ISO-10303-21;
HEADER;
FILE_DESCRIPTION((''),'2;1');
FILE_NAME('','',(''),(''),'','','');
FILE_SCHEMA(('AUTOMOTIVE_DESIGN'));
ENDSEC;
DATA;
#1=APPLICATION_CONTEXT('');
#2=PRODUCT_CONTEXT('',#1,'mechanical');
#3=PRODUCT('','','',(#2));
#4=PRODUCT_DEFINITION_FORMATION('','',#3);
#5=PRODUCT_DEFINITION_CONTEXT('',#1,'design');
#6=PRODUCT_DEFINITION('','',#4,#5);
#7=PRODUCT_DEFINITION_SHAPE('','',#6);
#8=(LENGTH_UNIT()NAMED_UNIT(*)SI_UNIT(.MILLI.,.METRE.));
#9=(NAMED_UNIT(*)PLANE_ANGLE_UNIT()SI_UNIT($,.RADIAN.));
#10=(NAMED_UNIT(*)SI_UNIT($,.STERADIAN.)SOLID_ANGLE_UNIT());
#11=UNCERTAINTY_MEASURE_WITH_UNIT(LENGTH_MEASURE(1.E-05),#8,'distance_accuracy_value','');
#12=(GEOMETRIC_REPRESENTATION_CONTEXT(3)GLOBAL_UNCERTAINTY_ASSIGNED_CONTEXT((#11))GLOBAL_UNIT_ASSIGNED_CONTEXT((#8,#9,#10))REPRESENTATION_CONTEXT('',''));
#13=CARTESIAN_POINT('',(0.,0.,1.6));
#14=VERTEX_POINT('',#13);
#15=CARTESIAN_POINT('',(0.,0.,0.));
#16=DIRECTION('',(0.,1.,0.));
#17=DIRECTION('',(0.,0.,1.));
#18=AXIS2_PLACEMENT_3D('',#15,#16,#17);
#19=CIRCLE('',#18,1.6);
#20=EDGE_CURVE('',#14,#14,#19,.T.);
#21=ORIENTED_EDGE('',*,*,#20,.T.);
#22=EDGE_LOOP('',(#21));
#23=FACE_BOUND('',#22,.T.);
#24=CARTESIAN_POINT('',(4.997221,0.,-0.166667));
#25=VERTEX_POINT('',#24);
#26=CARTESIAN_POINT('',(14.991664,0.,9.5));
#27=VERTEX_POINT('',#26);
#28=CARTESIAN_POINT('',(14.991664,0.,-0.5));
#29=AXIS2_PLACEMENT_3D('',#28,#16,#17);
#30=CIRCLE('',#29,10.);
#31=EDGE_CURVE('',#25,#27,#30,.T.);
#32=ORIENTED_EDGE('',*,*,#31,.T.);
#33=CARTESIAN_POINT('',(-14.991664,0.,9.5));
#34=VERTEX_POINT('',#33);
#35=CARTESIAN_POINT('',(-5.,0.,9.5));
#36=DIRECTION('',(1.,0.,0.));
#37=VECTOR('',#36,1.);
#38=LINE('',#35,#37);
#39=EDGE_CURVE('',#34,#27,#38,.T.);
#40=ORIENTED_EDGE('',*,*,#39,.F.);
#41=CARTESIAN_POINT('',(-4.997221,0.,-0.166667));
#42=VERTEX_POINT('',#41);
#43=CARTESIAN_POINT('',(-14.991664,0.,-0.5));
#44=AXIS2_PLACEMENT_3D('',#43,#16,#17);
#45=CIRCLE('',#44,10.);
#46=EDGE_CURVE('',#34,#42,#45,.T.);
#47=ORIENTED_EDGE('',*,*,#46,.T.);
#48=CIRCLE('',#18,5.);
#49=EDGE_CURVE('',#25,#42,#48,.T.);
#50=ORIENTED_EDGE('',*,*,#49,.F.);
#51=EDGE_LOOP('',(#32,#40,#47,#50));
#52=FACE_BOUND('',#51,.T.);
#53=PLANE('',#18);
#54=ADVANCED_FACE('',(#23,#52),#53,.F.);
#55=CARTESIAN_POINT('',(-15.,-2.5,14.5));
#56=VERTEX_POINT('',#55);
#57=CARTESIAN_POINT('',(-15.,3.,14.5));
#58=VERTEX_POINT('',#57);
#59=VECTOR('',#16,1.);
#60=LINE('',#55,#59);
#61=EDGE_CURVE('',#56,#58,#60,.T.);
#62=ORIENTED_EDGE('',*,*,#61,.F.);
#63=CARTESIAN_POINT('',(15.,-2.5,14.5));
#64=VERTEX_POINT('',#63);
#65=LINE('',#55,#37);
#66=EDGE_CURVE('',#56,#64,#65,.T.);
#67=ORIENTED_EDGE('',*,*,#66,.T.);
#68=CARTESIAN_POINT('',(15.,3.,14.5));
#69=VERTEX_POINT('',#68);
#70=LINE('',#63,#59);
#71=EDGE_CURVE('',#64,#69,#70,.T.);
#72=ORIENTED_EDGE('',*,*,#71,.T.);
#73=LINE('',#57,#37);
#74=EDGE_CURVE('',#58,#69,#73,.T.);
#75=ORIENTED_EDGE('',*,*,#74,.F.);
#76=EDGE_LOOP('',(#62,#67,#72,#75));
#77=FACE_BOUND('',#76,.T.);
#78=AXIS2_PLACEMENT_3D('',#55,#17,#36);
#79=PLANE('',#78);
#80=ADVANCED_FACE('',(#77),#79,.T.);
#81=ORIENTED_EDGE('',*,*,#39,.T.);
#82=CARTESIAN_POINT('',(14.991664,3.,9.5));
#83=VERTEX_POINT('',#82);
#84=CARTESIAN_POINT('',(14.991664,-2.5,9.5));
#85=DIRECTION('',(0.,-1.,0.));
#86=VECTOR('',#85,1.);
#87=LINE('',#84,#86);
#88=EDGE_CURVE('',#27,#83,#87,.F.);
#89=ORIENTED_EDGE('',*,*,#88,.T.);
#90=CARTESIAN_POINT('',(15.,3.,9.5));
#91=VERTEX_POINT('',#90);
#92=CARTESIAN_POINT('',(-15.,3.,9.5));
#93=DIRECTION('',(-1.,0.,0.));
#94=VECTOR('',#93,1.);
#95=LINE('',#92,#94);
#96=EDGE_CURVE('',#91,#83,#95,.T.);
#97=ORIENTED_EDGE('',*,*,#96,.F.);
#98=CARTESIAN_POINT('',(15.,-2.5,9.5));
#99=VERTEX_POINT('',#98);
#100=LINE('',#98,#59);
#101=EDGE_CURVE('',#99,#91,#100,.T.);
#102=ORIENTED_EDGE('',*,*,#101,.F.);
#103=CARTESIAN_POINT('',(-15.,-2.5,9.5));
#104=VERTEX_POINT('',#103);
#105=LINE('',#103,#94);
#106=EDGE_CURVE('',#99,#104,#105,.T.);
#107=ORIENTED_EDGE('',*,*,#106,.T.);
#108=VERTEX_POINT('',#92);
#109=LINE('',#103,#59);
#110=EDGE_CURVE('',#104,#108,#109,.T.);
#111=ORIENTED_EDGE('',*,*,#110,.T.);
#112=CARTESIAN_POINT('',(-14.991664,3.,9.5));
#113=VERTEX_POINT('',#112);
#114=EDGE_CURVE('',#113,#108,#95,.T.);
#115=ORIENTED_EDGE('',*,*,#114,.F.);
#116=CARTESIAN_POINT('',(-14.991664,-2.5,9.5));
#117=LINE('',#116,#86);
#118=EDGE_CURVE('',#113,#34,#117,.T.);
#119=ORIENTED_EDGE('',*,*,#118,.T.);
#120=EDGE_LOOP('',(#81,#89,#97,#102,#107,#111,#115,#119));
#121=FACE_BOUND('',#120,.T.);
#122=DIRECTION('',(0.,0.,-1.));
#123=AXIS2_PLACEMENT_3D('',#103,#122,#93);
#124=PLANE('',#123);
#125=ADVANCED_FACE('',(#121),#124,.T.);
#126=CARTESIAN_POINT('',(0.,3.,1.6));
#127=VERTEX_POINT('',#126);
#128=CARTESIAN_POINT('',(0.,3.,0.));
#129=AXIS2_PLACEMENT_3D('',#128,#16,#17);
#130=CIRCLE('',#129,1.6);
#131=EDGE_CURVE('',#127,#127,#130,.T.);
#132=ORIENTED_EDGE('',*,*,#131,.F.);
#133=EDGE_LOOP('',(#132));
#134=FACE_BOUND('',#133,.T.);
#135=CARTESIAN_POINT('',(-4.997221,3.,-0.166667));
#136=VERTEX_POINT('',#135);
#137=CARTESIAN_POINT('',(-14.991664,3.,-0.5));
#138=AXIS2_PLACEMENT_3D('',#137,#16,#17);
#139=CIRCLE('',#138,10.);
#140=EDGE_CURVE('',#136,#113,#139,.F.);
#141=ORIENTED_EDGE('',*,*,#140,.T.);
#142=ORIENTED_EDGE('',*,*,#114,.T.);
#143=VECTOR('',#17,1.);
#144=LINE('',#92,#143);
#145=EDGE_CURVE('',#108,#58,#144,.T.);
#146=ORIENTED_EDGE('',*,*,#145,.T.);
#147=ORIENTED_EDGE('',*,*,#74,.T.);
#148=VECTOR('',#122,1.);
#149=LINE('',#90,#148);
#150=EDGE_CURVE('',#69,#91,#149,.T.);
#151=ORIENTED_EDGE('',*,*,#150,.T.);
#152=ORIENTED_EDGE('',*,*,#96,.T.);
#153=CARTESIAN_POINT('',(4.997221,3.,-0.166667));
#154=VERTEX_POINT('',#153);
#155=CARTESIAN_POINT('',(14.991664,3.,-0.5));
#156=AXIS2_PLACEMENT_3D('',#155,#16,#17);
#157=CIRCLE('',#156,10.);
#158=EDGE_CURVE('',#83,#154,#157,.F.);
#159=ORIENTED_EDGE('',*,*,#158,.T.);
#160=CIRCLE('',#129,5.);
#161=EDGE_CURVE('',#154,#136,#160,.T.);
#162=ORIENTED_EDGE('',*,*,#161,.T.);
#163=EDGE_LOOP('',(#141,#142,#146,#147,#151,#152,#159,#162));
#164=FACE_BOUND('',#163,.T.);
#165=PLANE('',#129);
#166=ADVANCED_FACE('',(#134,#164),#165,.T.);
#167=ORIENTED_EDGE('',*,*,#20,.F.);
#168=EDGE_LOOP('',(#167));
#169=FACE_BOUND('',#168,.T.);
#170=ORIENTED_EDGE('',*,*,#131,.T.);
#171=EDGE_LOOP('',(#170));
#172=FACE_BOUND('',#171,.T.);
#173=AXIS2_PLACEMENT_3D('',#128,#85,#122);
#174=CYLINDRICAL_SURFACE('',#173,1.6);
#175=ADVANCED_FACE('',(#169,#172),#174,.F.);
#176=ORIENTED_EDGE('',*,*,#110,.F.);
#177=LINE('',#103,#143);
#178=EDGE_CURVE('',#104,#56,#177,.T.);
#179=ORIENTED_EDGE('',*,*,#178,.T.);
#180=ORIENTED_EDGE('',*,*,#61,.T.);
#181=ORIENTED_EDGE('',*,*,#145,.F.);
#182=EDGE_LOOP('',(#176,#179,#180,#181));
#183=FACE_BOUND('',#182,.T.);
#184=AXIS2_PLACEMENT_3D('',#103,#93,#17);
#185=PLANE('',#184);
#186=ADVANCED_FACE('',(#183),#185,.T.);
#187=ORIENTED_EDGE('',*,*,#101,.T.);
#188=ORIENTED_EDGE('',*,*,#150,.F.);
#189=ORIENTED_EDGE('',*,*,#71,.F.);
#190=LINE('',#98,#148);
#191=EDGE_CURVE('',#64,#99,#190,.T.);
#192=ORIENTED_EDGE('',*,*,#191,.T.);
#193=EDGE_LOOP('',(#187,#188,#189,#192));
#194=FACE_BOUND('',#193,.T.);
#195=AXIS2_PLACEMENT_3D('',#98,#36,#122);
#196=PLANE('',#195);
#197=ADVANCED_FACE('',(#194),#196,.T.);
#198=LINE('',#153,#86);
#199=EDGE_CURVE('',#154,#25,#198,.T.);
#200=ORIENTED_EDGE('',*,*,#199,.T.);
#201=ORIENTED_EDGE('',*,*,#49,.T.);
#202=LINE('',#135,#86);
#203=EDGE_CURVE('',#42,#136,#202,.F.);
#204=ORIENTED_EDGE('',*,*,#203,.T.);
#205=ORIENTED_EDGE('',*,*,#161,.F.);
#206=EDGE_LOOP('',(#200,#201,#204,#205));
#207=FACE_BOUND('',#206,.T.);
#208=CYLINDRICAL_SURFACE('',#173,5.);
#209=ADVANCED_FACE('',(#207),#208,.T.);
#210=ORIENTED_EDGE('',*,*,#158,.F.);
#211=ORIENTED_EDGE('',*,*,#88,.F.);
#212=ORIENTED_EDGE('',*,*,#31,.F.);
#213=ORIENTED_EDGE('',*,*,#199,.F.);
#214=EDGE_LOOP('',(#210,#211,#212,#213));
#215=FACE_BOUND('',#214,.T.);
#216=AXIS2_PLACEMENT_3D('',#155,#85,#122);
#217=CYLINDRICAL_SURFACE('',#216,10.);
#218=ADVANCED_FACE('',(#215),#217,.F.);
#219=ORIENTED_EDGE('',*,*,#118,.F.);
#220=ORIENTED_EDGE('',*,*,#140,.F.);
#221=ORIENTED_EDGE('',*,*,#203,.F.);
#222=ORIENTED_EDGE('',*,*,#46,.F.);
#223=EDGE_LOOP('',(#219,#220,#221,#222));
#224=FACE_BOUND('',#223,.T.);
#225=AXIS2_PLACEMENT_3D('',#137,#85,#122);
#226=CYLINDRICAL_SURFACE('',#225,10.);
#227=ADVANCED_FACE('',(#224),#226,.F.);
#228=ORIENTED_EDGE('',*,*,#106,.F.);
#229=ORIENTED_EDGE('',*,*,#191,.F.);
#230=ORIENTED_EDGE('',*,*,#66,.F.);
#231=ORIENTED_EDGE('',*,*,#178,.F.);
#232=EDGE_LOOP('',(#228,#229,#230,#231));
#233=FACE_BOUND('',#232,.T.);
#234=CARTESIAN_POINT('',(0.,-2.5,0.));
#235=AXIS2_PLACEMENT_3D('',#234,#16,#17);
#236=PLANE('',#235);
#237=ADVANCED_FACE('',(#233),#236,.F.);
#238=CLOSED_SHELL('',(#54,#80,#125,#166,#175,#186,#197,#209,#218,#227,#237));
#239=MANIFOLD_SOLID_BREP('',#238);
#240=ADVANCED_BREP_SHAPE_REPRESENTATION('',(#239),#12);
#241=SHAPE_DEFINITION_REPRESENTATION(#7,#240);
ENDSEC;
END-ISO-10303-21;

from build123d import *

# Parameters (mm, degrees)
SKETCH_1_R      = 1.6
EXTRUDE_1_DEPTH = 3
SKETCH_2_W      = 30
SKETCH_2_H      = 5
EXTRUDE_2_DEPTH = 5.5
FILLET_1_R      = 10


with BuildPart() as part:
    # 草图1 → 凸台-拉伸1 (new body)
    with BuildSketch(Plane(origin=(0, 0, 0), x_dir=(1, 0, 0), z_dir=(0, 1, 0))):
        with BuildLine():
            Line((-5, 0), (-5, -9.5))
            Line((-5, -9.5), (5, -9.5))
            Line((5, -9.5), (5, 0))
            ThreePointArc((5, 0), (0, 5), (-5, 0))
        make_face()
        with Locations(Location((0, 0, 0), (0, 0, 270))):
            Circle(SKETCH_1_R, mode=Mode.SUBTRACT)
    extrude(amount=EXTRUDE_1_DEPTH)

    # 草图2 → 凸台-拉伸2 (add)
    with BuildSketch(Plane(origin=(0, 3, 0), x_dir=(1, 0, 0), z_dir=(0, 1, 0))):
        with Locations((0, -12)):
            Rectangle(SKETCH_2_W, SKETCH_2_H)
    extrude(amount=-EXTRUDE_2_DEPTH)

    # 圆角1
    # the kernel refuses this fillet: 10 mm, written as the material it adds along each edge
    with BuildSketch(Plane(origin=(-5, 0, 9.5), x_dir=(-1, 0, 0), z_dir=(0, 1, 0))) as fillet_1_piece_1:
        with BuildLine():
            CenterArc((9.991664351, -10), FILLET_1_R, 90, 88.089786828)
            Line((-0.00277855, -9.666666667), (-1.00222284, -9.633333333))
            ThreePointArc((-1.00222284, -9.633333333), (-1, -9.5), (-1, 0))
            Line((-1, 0), (0, 1))
            Line((0, 1), (9.991664351, 1))
            Line((9.991664351, 1), (9.991664351, 0))
        make_face()
    extrude(amount=3)
    with BuildSketch(Plane(origin=(5, 0, 9.5), x_dir=(1, 0, 0), z_dir=(0, 1, 0))) as fillet_1_piece_2:
        with BuildLine():
            CenterArc((9.991664351, 10), FILLET_1_R, 181.910213172, 88.089786828)
            Line((-0.00277855, 9.666666667), (-1.00222284, 9.633333333))
            ThreePointArc((-1.00222284, 9.633333333), (-1, 9.5), (-1, 0))
            Line((-1, 0), (0, -1))
            Line((0, -1), (9.991664351, -1))
            Line((9.991664351, -1), (9.991664351, 0))
        make_face()
    extrude(amount=3)


solid = part.part
